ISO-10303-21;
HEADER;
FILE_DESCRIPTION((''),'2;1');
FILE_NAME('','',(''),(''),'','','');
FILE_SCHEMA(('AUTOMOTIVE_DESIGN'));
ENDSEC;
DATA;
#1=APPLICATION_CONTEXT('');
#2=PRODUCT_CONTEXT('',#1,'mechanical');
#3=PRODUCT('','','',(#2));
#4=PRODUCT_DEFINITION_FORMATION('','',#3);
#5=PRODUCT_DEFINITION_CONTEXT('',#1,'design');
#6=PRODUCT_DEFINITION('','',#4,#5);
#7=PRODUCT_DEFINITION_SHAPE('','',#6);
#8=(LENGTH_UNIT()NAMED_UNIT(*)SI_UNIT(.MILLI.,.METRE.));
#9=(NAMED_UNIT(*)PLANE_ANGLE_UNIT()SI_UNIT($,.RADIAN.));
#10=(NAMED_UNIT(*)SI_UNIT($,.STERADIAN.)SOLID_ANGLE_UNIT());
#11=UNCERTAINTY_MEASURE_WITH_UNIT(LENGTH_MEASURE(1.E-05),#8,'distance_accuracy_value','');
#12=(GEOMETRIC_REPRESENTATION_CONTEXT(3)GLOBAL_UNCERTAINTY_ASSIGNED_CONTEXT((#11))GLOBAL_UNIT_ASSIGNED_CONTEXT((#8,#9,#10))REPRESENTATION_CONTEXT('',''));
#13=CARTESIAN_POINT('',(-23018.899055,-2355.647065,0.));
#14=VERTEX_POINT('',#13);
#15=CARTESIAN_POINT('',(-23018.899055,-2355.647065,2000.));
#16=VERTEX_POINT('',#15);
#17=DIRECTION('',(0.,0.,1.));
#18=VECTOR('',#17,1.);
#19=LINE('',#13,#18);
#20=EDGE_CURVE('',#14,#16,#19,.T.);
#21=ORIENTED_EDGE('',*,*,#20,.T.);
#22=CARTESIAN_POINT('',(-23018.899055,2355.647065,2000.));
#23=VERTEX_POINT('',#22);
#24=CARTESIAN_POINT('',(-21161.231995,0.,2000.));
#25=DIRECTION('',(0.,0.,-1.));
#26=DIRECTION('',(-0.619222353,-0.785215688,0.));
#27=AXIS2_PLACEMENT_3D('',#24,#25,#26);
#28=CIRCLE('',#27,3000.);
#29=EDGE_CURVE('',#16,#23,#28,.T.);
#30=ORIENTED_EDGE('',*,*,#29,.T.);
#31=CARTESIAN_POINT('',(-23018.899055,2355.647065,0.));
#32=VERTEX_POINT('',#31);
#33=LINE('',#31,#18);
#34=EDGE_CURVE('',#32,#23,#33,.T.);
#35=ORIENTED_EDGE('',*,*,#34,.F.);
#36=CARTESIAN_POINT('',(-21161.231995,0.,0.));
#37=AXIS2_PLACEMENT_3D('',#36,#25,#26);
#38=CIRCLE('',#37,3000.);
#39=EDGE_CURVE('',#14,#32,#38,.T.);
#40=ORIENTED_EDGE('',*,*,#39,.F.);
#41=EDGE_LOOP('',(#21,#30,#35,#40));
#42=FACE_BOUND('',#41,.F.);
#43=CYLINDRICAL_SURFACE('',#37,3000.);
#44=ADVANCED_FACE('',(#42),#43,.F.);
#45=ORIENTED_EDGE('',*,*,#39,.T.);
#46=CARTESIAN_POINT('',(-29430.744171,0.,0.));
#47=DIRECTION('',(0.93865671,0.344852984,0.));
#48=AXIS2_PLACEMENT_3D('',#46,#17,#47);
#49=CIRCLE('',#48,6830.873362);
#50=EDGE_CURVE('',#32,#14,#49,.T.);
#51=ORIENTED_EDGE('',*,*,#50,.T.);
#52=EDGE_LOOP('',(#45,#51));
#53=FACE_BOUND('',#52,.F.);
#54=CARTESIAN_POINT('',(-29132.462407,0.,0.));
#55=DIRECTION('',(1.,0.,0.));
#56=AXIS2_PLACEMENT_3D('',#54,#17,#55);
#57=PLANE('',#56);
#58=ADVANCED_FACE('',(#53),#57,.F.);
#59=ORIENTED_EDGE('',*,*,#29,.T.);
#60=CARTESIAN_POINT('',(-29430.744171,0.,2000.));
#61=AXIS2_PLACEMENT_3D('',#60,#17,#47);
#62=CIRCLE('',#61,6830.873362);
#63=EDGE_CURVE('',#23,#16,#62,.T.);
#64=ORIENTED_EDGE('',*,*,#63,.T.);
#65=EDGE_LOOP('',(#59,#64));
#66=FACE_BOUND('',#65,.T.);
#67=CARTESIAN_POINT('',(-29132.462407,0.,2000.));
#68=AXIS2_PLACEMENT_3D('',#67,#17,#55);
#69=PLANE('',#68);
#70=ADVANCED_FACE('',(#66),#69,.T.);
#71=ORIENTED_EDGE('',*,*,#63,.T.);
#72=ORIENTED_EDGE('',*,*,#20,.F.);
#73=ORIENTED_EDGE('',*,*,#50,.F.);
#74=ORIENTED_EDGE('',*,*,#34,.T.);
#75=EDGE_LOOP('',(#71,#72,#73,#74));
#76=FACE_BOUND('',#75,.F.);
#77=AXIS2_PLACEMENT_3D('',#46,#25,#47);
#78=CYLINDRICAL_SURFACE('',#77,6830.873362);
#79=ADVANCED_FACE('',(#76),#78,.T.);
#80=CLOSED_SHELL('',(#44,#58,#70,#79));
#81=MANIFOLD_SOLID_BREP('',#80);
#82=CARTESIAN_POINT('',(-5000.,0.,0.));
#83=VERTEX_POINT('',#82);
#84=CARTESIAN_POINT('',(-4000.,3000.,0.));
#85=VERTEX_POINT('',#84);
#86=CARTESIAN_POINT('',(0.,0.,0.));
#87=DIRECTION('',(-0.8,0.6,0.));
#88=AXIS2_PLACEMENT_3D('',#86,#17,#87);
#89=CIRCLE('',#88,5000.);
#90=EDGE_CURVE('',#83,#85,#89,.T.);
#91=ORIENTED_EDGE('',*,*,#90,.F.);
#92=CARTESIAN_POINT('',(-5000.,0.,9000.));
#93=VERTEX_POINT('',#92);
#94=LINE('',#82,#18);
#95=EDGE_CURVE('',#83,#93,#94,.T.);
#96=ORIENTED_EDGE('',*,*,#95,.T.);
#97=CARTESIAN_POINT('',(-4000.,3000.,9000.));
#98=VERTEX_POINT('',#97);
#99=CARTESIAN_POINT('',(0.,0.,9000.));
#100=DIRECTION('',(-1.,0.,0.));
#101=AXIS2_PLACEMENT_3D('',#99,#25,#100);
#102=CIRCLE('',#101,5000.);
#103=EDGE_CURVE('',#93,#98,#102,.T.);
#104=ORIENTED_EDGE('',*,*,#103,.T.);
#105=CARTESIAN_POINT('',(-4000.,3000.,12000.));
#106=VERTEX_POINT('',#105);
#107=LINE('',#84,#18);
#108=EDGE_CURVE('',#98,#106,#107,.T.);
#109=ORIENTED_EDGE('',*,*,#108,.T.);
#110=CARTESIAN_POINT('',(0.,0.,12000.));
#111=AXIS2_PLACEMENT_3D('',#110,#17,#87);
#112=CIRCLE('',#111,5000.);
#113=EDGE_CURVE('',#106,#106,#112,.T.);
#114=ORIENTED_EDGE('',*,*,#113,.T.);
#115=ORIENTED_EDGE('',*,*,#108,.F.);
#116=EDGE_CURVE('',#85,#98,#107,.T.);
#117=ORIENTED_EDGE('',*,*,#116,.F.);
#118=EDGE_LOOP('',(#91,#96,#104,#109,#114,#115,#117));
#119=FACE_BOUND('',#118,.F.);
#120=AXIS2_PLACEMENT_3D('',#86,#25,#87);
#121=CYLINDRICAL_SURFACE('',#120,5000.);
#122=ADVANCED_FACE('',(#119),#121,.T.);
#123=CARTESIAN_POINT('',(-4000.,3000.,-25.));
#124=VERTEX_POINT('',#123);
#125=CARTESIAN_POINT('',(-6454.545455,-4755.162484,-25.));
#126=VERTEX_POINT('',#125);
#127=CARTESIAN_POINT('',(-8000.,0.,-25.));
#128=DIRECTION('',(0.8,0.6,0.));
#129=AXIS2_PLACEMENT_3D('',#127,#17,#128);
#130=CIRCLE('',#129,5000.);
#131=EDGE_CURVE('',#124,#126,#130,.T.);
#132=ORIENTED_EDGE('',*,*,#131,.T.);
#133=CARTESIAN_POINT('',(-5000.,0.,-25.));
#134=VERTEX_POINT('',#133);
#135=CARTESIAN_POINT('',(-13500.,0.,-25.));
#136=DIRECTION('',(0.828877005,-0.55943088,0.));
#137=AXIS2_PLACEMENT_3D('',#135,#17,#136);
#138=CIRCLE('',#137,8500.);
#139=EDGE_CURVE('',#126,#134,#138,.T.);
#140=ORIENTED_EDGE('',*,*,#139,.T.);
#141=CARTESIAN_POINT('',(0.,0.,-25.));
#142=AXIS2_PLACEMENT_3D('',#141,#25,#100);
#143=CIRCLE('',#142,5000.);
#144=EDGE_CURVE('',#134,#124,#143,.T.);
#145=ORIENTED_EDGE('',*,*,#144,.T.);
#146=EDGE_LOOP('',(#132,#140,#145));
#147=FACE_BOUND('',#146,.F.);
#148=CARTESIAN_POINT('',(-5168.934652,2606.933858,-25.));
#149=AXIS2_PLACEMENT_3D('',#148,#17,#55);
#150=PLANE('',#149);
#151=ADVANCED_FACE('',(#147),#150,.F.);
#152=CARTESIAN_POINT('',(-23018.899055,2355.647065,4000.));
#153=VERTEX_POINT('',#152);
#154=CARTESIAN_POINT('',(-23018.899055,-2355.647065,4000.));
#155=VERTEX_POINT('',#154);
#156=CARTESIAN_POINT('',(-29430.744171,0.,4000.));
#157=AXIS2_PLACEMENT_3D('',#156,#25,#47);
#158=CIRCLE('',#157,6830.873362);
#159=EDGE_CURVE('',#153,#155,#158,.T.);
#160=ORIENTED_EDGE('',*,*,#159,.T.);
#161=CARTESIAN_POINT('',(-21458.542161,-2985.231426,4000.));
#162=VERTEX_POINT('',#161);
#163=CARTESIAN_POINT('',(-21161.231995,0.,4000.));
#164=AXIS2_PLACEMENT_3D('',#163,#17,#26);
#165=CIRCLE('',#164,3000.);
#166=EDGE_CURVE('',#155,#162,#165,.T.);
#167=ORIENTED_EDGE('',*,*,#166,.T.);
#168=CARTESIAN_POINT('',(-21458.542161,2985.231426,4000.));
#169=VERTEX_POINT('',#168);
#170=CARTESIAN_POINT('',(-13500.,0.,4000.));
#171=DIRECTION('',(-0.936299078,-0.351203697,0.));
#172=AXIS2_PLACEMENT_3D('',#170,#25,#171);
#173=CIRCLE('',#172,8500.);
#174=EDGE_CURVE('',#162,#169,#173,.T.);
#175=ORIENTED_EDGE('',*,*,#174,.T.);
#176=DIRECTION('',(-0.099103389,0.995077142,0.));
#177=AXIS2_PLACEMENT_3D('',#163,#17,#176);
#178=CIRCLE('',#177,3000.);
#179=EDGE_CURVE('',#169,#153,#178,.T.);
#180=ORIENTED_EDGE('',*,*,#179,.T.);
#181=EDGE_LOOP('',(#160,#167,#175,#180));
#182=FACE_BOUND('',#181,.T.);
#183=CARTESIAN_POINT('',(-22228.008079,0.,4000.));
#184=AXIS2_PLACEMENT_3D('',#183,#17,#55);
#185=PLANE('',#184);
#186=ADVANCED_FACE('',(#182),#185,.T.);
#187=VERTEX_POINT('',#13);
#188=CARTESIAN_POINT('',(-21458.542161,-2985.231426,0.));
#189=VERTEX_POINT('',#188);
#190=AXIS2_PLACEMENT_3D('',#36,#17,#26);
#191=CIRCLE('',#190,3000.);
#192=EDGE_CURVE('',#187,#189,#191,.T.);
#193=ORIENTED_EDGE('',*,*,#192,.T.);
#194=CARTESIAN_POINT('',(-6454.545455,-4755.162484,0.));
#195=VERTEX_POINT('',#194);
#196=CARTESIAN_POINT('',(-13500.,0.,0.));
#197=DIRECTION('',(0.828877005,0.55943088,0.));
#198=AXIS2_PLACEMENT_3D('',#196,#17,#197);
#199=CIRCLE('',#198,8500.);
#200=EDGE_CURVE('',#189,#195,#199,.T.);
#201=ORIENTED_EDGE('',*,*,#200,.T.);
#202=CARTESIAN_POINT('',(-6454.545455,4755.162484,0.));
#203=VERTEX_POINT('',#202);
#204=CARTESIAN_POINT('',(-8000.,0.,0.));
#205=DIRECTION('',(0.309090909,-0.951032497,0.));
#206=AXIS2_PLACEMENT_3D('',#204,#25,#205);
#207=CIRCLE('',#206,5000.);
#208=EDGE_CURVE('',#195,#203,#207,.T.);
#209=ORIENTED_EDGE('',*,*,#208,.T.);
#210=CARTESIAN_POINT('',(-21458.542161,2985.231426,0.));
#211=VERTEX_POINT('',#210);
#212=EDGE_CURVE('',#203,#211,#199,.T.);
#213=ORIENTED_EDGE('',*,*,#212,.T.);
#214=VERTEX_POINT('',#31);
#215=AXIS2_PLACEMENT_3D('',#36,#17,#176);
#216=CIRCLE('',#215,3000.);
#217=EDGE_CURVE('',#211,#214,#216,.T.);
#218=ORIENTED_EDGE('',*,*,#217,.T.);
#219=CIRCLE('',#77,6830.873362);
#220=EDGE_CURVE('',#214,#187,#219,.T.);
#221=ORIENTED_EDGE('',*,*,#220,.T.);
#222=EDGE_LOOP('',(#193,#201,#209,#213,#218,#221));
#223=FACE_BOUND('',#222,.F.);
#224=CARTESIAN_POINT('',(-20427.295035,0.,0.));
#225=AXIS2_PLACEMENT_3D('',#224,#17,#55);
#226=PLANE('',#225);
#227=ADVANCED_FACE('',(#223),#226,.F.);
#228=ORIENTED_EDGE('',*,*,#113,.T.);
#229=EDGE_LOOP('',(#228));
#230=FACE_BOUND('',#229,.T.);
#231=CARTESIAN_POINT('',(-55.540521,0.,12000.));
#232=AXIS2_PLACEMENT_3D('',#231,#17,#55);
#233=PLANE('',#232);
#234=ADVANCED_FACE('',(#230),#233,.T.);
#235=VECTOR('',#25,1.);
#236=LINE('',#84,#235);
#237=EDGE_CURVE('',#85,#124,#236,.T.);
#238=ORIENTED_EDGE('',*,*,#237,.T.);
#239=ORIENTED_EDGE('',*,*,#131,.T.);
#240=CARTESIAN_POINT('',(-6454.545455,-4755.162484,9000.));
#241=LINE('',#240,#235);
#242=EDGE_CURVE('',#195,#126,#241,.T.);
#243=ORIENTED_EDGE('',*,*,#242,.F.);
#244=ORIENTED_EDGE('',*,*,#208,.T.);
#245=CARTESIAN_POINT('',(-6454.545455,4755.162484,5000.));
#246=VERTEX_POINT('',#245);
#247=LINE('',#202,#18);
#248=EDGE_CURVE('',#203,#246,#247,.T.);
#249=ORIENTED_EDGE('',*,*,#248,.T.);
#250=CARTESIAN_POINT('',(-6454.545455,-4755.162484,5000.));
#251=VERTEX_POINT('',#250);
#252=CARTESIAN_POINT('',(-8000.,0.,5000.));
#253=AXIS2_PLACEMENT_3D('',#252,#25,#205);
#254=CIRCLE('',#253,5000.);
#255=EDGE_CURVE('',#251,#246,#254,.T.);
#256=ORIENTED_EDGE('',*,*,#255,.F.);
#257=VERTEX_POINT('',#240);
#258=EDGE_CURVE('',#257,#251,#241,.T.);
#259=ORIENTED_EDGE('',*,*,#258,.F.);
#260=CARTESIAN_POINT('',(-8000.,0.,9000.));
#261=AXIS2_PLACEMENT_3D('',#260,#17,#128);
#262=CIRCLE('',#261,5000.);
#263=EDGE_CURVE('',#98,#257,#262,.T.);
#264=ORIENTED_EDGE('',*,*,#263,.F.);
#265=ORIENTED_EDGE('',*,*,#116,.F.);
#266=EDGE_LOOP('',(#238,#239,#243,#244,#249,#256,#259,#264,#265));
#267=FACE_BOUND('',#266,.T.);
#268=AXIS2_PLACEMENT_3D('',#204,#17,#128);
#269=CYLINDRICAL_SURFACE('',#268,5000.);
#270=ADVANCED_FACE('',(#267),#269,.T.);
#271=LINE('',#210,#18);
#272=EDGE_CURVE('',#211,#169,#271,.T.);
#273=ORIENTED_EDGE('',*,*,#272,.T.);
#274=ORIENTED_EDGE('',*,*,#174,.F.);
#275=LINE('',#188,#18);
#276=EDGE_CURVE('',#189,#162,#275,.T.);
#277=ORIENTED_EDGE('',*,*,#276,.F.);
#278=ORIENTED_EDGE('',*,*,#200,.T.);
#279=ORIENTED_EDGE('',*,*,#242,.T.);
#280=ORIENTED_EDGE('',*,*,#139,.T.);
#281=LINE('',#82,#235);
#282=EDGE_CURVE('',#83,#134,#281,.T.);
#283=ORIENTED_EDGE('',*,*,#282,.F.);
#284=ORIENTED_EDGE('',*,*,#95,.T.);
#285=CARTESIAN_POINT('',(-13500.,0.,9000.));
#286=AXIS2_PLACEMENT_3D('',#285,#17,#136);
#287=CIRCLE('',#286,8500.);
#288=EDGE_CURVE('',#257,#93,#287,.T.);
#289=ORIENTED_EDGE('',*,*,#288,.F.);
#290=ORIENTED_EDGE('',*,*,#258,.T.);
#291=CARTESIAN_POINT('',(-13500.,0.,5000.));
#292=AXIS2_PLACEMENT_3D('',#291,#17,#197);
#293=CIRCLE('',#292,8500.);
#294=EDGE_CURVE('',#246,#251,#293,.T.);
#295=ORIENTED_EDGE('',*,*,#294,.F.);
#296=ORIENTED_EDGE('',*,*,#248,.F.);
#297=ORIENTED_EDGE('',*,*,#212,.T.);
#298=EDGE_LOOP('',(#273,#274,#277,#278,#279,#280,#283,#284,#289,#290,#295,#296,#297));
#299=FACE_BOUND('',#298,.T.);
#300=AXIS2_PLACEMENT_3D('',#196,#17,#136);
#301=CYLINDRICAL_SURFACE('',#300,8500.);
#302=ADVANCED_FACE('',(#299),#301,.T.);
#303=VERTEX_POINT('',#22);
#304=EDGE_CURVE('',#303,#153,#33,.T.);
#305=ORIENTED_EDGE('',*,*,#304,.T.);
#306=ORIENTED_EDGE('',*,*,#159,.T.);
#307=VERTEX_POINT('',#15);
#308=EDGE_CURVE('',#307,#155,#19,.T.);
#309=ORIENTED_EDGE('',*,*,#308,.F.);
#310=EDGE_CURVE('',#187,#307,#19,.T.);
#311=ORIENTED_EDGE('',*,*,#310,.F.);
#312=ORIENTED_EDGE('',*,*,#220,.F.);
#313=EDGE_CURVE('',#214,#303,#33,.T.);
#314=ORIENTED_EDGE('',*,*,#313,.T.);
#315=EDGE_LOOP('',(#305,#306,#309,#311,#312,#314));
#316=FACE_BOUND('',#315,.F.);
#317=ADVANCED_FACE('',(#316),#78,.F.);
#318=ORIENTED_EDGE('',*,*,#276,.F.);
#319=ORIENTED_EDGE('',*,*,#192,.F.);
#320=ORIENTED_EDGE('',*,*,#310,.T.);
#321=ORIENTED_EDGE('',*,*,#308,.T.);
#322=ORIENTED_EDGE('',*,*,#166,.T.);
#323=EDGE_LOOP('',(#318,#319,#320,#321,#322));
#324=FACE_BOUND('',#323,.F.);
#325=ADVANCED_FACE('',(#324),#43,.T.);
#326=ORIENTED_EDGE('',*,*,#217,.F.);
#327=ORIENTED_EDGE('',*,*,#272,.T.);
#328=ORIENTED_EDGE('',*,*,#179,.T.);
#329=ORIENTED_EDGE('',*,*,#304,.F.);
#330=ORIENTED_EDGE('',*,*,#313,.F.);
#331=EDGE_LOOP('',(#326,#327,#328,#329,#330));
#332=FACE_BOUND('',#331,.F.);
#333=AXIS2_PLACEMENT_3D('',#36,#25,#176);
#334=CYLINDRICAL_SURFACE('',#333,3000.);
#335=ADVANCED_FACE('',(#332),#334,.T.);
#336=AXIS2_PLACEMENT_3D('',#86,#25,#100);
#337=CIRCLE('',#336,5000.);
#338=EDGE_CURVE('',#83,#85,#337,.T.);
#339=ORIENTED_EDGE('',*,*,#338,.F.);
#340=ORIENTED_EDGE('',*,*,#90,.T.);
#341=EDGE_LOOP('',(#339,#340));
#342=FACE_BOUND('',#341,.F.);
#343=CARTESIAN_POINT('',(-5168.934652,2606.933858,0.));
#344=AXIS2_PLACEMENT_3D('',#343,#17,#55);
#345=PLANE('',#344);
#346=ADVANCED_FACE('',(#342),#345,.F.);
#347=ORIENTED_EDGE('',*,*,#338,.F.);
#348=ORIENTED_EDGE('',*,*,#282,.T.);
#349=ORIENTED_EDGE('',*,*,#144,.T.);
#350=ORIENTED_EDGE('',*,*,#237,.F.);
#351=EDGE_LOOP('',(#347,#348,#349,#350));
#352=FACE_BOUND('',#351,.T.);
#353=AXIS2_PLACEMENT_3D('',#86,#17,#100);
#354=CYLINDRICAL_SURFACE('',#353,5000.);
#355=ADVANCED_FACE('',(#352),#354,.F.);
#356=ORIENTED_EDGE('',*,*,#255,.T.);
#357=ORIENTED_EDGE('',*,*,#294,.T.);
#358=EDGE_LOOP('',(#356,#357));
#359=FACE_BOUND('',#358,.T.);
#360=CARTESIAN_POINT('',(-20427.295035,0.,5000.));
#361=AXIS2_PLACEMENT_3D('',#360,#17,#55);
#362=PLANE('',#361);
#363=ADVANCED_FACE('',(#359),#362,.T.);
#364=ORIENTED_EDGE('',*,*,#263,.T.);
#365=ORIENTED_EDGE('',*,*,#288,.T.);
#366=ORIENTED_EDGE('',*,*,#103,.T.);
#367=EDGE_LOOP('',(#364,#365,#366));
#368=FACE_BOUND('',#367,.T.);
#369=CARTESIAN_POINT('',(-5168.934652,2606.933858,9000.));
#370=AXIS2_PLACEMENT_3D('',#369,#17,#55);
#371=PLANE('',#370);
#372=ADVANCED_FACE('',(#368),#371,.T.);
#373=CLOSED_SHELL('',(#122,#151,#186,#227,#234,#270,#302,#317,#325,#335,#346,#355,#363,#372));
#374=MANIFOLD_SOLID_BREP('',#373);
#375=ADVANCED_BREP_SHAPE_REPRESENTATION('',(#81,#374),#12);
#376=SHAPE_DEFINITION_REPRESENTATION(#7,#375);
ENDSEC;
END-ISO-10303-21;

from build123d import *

# Parameters (mm, degrees)
F1_DEPTH      = 12000
F2_DEPTH      = 9000
F2_DEPTH_BACK = 25
F3_DEPTH      = 5000
F4_DEPTH      = 4000
F5_DEPTH      = 2000


# Not quite as in the source:
# - a feature names something its author has since deleted; it is built from what else it names


with BuildPart() as f1:
    # F0 (on Top) → F1 (new body)
    with BuildSketch(Plane.XY):
        with BuildLine():
            ThreePointArc((-4000, -3000), (1581.1388300842, -4743.4164902526), (5000, 0))
            ThreePointArc((5000, 0), (1581.1388300842, 4743.4164902526), (-4000, 3000))
            ThreePointArc((-4000, 3000), (-3256.5835097474, 1581.1388300842), (-3000, 0))
            ThreePointArc((-3000, 0), (-3256.5835097474, -1581.1388300842), (-4000, -3000))
        make_face()
        with BuildLine():
            ThreePointArc((-3000, 0), (-3256.5835097474, 1581.1388300842), (-4000, 3000))
            ThreePointArc((-4000, 3000), (-4743.4164902526, 1581.1388300842), (-5000, 0))
            ThreePointArc((-5000, 0), (-4743.4164902526, -1581.1388300842), (-4000, -3000))
            ThreePointArc((-4000, -3000), (-3256.5835097474, -1581.1388300842), (-3000, 0))
        make_face()
    extrude(amount=F1_DEPTH)

    # F0 (on Top) → F2 (join, two sides)
    with BuildSketch(Plane.XY) as f2_sk:
        with BuildLine():
            ThreePointArc((-5000, 0), (-4743.4164902526, 1581.1388300842), (-4000, 3000))
            ThreePointArc((-4000, 3000), (-5091.7074828837, 4067.1654299875), (-6454.5454545455, 4755.1624838626))
            ThreePointArc((-6454.5454545455, 4755.1624838626), (-5371.7663777312, 2486.3262420323), (-5000, 0))
        make_face()
        with BuildLine():
            ThreePointArc((-6454.5454545455, -4755.1624838626), (-5371.7663777312, -2486.3262420323), (-5000, 0))
            ThreePointArc((-5000, 0), (-5371.7663777312, 2486.3262420323), (-6454.5454545455, 4755.1624838626))
            ThreePointArc((-6454.5454545455, 4755.1624838626), (-13000, 0), (-6454.5454545456, -4755.1624838626))
        make_face()
    extrude(amount=F2_DEPTH)
    extrude(f2_sk.sketch, amount=-F2_DEPTH_BACK)

    # F0 (on Top) → F3 (join)
    with BuildSketch(Plane.XY):
        with BuildLine():
            ThreePointArc((-18161.2319946289, 0), (-19147.7686227754, 2223.9526186959), (-21458.5421614318, 2985.2314256546))
            ThreePointArc((-21458.5421614317, 2985.2314256544), (-22000, 0), (-21458.5421614317, -2985.2314256544))
            ThreePointArc((-21458.5421614318, -2985.2314256546), (-19147.7686227754, -2223.9526186959), (-18161.2319946289, 0))
        make_face()
        with BuildLine():
            ThreePointArc((-6454.5454545456, -4755.1624838626), (-13000, 0), (-6454.5454545455, 4755.1624838626))
            ThreePointArc((-6454.5454545455, 4755.1624838626), (-14495.7892529623, 8441.4692893882), (-21458.5421614317, 2985.2314256544))
            ThreePointArc((-21458.5421614318, 2985.2314256546), (-19147.7686227754, 2223.9526186959), (-18161.2319946289, 0))
            ThreePointArc((-18161.2319946289, 0), (-19147.7686227754, -2223.9526186959), (-21458.5421614318, -2985.2314256546))
            ThreePointArc((-21458.5421614317, -2985.2314256544), (-14495.7892529623, -8441.4692893882), (-6454.5454545455, -4755.1624838626))
        make_face()
    extrude(amount=F3_DEPTH)

    # F0 (on Top) → F4 (join)
    with BuildSketch(Plane.XY):
        with BuildLine():
            ThreePointArc((-21458.5421614317, -2985.2314256544), (-22000, 0), (-21458.5421614317, 2985.2314256544))
            ThreePointArc((-21458.5421614318, 2985.2314256546), (-22283.7629869561, 2782.0719205773), (-23018.8990545433, 2355.6470649291))
            ThreePointArc((-23018.8990545434, 2355.6470649291), (-22705.4436981203, 1196.3128526148), (-22599.8708086972, 0))
            ThreePointArc((-22599.8708086972, 0), (-22705.4436981203, -1196.3128526148), (-23018.8990545434, -2355.6470649291))
            ThreePointArc((-23018.8990545433, -2355.6470649291), (-22283.7629869561, -2782.0719205773), (-21458.5421614318, -2985.2314256546))
        make_face()
    extrude(amount=F4_DEPTH)

    # F0 (on Top) → F5 (join)
    with BuildSketch(Plane.XY):
        with BuildLine():
            ThreePointArc((-23018.8990545433, -2355.6470649291), (-24161.2319946289, 0), (-23018.8990545433, 2355.6470649291))
            ThreePointArc((-23018.8990545434, 2355.6470649291), (-36261.6175335879, 0), (-23018.8990545434, -2355.6470649291))
        make_face()
    extrude(amount=F5_DEPTH)


solid = f1.part
